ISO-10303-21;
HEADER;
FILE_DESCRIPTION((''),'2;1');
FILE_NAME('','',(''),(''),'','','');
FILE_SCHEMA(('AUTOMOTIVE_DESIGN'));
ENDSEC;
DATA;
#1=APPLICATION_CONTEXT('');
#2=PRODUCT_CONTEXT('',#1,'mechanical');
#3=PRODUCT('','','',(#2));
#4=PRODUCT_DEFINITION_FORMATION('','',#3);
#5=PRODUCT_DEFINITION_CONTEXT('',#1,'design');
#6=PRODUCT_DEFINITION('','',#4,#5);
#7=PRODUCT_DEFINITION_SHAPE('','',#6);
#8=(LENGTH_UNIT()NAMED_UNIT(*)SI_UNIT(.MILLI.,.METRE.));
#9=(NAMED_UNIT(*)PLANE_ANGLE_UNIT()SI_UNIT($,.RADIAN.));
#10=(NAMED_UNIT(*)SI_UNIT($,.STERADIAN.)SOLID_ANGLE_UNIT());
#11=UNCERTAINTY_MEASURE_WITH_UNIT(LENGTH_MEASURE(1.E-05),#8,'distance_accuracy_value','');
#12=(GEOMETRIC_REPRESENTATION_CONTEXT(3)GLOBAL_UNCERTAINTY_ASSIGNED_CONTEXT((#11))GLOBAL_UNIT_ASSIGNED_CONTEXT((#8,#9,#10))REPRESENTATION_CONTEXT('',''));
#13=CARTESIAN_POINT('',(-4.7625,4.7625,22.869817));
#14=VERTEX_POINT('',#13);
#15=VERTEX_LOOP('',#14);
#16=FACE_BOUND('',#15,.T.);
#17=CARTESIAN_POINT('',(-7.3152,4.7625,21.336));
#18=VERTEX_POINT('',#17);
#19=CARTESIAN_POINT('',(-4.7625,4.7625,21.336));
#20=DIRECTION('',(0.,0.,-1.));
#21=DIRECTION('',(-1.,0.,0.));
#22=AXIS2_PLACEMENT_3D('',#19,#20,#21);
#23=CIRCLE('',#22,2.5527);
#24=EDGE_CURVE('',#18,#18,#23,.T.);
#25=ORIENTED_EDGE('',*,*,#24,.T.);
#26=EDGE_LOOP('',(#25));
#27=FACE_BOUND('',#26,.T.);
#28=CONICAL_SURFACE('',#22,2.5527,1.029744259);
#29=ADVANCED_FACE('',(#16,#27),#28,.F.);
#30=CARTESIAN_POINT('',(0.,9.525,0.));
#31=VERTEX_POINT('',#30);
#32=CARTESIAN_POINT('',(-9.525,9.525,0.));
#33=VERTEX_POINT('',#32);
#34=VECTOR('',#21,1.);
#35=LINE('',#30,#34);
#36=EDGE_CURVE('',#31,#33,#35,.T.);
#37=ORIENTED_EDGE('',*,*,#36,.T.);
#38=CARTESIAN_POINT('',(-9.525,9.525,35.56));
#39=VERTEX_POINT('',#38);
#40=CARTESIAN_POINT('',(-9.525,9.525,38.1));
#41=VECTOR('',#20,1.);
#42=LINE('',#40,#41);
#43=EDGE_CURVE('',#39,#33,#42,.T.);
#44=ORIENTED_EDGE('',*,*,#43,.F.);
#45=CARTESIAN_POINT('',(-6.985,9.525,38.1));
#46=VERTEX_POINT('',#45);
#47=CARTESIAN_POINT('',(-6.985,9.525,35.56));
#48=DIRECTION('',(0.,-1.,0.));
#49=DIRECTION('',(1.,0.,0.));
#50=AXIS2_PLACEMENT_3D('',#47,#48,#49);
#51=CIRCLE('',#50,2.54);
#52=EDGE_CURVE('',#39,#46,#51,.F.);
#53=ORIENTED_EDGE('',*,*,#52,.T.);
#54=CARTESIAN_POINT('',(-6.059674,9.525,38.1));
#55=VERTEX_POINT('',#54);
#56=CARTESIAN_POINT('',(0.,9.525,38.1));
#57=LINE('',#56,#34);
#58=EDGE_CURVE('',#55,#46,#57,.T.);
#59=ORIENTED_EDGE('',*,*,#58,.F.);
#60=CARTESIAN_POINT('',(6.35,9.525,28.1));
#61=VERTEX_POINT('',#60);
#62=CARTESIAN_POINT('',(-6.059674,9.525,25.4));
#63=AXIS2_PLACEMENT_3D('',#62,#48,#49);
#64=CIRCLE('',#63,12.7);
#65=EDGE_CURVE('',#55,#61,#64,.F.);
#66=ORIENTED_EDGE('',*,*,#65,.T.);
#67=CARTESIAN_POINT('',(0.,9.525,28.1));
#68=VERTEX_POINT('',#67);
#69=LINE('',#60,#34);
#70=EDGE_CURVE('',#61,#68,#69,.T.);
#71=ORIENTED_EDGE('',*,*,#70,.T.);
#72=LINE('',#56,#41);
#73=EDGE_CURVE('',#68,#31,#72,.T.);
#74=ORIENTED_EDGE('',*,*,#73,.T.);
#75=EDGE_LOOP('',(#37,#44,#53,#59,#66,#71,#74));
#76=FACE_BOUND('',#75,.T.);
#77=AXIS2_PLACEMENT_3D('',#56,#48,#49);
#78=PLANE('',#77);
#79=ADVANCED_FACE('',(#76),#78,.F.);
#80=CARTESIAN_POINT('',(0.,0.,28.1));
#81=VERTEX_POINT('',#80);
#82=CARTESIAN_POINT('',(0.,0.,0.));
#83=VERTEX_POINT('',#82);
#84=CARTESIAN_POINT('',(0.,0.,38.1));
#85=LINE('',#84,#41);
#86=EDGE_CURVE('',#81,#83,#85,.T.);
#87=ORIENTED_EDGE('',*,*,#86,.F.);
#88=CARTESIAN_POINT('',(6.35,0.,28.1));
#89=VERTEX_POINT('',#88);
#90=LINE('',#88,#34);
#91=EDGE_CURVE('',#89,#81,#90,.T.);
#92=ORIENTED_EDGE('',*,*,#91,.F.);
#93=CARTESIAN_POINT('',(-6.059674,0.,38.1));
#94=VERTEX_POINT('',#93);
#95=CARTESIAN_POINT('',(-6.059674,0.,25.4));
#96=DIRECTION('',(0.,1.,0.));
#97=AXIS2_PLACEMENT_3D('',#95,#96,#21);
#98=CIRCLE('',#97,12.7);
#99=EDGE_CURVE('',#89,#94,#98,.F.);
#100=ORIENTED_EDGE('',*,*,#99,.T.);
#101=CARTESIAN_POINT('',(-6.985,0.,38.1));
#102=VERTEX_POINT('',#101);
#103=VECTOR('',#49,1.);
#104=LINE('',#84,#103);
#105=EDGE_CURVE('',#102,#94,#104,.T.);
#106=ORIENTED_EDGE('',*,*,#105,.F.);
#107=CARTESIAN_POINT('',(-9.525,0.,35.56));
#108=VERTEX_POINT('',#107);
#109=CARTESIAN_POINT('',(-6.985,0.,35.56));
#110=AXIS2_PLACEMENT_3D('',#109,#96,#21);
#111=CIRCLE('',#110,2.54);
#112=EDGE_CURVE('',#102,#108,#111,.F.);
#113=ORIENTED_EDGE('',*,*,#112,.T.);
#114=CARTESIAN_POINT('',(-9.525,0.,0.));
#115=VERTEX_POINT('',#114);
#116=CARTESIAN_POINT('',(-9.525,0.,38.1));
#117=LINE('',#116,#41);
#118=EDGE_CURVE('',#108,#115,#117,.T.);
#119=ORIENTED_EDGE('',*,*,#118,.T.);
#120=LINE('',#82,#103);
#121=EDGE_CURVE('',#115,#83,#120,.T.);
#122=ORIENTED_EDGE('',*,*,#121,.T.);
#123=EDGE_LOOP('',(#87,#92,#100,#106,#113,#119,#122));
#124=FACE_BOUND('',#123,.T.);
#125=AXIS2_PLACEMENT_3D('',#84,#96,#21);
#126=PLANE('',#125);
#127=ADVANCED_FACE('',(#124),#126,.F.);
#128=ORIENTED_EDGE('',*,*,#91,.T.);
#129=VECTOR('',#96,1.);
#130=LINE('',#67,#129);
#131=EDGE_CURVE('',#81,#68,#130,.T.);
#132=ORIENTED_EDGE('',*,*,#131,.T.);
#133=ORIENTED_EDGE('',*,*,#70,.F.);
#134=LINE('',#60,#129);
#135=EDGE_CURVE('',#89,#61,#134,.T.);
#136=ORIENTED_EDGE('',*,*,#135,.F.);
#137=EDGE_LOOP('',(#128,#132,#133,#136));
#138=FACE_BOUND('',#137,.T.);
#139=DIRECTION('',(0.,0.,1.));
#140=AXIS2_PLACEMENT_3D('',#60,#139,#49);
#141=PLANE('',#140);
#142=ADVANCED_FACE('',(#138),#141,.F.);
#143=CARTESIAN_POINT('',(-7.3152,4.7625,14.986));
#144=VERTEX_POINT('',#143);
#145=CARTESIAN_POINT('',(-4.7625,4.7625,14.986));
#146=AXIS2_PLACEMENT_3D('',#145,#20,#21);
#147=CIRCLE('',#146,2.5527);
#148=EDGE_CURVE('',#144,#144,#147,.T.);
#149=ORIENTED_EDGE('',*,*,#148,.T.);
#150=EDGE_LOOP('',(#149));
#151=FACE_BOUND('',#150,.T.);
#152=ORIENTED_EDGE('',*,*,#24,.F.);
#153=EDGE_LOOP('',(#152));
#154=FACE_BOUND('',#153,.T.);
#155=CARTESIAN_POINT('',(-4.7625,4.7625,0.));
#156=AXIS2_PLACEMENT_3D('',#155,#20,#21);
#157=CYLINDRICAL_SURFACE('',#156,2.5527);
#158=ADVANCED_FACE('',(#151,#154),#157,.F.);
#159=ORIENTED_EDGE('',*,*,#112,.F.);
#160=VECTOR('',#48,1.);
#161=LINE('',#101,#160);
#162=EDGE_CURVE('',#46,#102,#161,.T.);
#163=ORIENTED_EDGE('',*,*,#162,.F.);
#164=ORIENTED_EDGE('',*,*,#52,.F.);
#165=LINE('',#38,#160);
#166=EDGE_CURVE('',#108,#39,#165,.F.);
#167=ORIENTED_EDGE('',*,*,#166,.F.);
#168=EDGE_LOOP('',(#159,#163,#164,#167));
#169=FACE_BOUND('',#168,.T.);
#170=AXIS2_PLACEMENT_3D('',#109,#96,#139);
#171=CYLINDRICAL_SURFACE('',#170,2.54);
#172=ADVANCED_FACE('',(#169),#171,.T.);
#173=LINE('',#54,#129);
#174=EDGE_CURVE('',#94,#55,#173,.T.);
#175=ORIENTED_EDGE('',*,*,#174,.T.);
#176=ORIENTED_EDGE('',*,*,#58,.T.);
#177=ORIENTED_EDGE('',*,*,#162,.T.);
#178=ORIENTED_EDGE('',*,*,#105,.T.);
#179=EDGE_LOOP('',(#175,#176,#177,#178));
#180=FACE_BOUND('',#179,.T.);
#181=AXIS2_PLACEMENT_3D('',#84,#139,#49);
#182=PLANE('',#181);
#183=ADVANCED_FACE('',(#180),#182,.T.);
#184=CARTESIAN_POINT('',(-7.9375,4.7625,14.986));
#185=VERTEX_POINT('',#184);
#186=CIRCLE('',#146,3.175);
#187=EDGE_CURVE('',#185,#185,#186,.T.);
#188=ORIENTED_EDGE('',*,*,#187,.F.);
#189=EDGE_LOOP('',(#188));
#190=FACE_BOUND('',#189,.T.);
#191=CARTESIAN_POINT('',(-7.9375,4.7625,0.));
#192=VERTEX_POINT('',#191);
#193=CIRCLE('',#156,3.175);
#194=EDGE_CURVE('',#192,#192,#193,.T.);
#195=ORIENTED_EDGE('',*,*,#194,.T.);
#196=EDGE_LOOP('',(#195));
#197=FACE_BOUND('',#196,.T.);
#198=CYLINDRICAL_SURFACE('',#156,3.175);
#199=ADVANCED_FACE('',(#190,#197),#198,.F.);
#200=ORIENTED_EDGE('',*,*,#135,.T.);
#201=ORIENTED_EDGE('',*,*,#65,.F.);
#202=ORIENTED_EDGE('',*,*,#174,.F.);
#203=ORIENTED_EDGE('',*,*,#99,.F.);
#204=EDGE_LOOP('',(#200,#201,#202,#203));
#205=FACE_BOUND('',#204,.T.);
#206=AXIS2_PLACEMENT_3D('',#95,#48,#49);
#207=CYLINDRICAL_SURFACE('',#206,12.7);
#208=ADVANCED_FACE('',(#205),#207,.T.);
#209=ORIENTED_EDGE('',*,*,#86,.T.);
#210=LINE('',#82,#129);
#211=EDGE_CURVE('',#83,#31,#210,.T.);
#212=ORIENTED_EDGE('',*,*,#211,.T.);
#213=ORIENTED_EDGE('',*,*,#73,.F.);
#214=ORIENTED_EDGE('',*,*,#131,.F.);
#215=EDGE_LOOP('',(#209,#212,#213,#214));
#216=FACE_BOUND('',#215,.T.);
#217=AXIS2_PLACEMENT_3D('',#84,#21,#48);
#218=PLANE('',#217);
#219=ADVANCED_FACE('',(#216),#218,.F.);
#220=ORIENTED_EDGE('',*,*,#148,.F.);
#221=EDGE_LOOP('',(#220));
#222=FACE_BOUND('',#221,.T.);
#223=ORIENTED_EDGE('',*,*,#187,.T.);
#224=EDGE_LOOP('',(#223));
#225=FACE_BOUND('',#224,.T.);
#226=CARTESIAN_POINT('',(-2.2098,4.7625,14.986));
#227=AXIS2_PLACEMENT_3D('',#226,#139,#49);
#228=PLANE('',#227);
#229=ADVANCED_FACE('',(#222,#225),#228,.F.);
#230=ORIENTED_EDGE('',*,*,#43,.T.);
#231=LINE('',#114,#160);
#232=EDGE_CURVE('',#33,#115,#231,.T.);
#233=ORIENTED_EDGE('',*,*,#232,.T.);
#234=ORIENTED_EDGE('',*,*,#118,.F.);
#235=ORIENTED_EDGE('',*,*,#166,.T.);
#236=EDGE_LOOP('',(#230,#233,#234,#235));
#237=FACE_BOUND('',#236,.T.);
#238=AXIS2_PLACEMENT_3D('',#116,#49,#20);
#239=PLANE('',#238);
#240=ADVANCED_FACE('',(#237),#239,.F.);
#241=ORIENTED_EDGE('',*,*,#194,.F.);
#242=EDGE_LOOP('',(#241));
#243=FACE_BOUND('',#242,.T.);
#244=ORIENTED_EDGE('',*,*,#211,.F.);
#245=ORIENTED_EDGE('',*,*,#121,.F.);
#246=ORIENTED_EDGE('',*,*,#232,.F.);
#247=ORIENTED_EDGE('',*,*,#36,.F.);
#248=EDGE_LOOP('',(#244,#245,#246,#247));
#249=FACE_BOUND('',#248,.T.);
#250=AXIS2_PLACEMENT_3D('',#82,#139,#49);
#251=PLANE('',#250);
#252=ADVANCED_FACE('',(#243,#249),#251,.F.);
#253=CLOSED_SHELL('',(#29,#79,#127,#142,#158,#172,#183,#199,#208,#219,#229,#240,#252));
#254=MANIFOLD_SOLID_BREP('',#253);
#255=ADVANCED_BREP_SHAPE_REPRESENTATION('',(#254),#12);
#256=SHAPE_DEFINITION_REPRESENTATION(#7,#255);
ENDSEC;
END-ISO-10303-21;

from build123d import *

# Parameters (mm, degrees)
SKETCH1_W                         = 9.525
SKETCH1_H                         = 9.525
EXTRUDE1_DEPTH                    = 38.1
F_1_4_20_TAPPED_HOLE1_D           = 5.1054
F_1_4_20_TAPPED_HOLE1_DEPTH       = 21.336
F_1_4_20_TAPPED_HOLE1_CBORE_D     = 6.35
F_1_4_20_TAPPED_HOLE1_CBORE_DEPTH = 14.986
F_1_4_20_TAPPED_HOLE1_TIP         = 1.533816902
SKETCH9_W                         = 10
SKETCH9_H                         = 9.525
EXTRUDE3_DEPTH                    = 6.35
FILLET2_R                         = 12.7
FILLET3_R                         = 2.54


with BuildPart() as part:
    # Sketch1 → Extrude1 (new body)
    with BuildSketch(Plane.XY):
        with Locations((-4.7625, 4.7625)):
            Rectangle(SKETCH1_W, SKETCH1_H)
    extrude(amount=EXTRUDE1_DEPTH)

    # 1/4-20 Tapped Hole1
    with Locations(Plane(origin=(-4.7625, 4.7625, 0), x_dir=(-1, 0, 0), z_dir=(0, 0, -1))):
        with Locations((0, 0)):
            CounterBoreHole(F_1_4_20_TAPPED_HOLE1_D / 2, F_1_4_20_TAPPED_HOLE1_CBORE_D / 2, F_1_4_20_TAPPED_HOLE1_CBORE_DEPTH, depth=F_1_4_20_TAPPED_HOLE1_DEPTH)
            with Locations((0, 0, -(F_1_4_20_TAPPED_HOLE1_DEPTH + F_1_4_20_TAPPED_HOLE1_TIP / 2))):  # 118° drill point
                Cone(0, F_1_4_20_TAPPED_HOLE1_D / 2, F_1_4_20_TAPPED_HOLE1_TIP, mode=Mode.SUBTRACT)

    # Sketch9 → Extrude3 (add)
    with BuildSketch(Plane(origin=(0, 0, 0), x_dir=(0, 0, -1), z_dir=(1, 0, 0))):
        with Locations((-33.1, 4.7625)):
            Rectangle(SKETCH9_W, SKETCH9_H)
    extrude(amount=EXTRUDE3_DEPTH)

    # Fillet2
    # the kernel refuses this fillet: 12.7 mm, written as the material it takes off along each edge
    with BuildSketch(Plane(origin=(6.35, -31.024184115, 38.1), x_dir=(-1, 0, 0), z_dir=(0, 1, 0))) as fillet2_piece_1:
        with BuildLine():
            CenterArc((12.409673646, -12.7), FILLET2_R, 90, 77.725329785)
            Line((0, -10), (-0.248193473, -9.946))
            ThreePointArc((-0.248193473, -9.946), (-0.254, -5), (-0.254, 0))
            Line((-0.254, 0), (0, 0.254))
            Line((0, 0.254), (12.409673646, 0.254))
            Line((12.409673646, 0.254), (12.409673646, 0))
        make_face()
    extrude(amount=71.57336823, mode=Mode.SUBTRACT)

    # Fillet3
    fillet3_edges = [part.edges().sort_by_distance(p)[0] for p in [
        (-9.525, 4.7625, 38.1),
    ]]
    fillet(fillet3_edges, radius=FILLET3_R)


solid = part.part
